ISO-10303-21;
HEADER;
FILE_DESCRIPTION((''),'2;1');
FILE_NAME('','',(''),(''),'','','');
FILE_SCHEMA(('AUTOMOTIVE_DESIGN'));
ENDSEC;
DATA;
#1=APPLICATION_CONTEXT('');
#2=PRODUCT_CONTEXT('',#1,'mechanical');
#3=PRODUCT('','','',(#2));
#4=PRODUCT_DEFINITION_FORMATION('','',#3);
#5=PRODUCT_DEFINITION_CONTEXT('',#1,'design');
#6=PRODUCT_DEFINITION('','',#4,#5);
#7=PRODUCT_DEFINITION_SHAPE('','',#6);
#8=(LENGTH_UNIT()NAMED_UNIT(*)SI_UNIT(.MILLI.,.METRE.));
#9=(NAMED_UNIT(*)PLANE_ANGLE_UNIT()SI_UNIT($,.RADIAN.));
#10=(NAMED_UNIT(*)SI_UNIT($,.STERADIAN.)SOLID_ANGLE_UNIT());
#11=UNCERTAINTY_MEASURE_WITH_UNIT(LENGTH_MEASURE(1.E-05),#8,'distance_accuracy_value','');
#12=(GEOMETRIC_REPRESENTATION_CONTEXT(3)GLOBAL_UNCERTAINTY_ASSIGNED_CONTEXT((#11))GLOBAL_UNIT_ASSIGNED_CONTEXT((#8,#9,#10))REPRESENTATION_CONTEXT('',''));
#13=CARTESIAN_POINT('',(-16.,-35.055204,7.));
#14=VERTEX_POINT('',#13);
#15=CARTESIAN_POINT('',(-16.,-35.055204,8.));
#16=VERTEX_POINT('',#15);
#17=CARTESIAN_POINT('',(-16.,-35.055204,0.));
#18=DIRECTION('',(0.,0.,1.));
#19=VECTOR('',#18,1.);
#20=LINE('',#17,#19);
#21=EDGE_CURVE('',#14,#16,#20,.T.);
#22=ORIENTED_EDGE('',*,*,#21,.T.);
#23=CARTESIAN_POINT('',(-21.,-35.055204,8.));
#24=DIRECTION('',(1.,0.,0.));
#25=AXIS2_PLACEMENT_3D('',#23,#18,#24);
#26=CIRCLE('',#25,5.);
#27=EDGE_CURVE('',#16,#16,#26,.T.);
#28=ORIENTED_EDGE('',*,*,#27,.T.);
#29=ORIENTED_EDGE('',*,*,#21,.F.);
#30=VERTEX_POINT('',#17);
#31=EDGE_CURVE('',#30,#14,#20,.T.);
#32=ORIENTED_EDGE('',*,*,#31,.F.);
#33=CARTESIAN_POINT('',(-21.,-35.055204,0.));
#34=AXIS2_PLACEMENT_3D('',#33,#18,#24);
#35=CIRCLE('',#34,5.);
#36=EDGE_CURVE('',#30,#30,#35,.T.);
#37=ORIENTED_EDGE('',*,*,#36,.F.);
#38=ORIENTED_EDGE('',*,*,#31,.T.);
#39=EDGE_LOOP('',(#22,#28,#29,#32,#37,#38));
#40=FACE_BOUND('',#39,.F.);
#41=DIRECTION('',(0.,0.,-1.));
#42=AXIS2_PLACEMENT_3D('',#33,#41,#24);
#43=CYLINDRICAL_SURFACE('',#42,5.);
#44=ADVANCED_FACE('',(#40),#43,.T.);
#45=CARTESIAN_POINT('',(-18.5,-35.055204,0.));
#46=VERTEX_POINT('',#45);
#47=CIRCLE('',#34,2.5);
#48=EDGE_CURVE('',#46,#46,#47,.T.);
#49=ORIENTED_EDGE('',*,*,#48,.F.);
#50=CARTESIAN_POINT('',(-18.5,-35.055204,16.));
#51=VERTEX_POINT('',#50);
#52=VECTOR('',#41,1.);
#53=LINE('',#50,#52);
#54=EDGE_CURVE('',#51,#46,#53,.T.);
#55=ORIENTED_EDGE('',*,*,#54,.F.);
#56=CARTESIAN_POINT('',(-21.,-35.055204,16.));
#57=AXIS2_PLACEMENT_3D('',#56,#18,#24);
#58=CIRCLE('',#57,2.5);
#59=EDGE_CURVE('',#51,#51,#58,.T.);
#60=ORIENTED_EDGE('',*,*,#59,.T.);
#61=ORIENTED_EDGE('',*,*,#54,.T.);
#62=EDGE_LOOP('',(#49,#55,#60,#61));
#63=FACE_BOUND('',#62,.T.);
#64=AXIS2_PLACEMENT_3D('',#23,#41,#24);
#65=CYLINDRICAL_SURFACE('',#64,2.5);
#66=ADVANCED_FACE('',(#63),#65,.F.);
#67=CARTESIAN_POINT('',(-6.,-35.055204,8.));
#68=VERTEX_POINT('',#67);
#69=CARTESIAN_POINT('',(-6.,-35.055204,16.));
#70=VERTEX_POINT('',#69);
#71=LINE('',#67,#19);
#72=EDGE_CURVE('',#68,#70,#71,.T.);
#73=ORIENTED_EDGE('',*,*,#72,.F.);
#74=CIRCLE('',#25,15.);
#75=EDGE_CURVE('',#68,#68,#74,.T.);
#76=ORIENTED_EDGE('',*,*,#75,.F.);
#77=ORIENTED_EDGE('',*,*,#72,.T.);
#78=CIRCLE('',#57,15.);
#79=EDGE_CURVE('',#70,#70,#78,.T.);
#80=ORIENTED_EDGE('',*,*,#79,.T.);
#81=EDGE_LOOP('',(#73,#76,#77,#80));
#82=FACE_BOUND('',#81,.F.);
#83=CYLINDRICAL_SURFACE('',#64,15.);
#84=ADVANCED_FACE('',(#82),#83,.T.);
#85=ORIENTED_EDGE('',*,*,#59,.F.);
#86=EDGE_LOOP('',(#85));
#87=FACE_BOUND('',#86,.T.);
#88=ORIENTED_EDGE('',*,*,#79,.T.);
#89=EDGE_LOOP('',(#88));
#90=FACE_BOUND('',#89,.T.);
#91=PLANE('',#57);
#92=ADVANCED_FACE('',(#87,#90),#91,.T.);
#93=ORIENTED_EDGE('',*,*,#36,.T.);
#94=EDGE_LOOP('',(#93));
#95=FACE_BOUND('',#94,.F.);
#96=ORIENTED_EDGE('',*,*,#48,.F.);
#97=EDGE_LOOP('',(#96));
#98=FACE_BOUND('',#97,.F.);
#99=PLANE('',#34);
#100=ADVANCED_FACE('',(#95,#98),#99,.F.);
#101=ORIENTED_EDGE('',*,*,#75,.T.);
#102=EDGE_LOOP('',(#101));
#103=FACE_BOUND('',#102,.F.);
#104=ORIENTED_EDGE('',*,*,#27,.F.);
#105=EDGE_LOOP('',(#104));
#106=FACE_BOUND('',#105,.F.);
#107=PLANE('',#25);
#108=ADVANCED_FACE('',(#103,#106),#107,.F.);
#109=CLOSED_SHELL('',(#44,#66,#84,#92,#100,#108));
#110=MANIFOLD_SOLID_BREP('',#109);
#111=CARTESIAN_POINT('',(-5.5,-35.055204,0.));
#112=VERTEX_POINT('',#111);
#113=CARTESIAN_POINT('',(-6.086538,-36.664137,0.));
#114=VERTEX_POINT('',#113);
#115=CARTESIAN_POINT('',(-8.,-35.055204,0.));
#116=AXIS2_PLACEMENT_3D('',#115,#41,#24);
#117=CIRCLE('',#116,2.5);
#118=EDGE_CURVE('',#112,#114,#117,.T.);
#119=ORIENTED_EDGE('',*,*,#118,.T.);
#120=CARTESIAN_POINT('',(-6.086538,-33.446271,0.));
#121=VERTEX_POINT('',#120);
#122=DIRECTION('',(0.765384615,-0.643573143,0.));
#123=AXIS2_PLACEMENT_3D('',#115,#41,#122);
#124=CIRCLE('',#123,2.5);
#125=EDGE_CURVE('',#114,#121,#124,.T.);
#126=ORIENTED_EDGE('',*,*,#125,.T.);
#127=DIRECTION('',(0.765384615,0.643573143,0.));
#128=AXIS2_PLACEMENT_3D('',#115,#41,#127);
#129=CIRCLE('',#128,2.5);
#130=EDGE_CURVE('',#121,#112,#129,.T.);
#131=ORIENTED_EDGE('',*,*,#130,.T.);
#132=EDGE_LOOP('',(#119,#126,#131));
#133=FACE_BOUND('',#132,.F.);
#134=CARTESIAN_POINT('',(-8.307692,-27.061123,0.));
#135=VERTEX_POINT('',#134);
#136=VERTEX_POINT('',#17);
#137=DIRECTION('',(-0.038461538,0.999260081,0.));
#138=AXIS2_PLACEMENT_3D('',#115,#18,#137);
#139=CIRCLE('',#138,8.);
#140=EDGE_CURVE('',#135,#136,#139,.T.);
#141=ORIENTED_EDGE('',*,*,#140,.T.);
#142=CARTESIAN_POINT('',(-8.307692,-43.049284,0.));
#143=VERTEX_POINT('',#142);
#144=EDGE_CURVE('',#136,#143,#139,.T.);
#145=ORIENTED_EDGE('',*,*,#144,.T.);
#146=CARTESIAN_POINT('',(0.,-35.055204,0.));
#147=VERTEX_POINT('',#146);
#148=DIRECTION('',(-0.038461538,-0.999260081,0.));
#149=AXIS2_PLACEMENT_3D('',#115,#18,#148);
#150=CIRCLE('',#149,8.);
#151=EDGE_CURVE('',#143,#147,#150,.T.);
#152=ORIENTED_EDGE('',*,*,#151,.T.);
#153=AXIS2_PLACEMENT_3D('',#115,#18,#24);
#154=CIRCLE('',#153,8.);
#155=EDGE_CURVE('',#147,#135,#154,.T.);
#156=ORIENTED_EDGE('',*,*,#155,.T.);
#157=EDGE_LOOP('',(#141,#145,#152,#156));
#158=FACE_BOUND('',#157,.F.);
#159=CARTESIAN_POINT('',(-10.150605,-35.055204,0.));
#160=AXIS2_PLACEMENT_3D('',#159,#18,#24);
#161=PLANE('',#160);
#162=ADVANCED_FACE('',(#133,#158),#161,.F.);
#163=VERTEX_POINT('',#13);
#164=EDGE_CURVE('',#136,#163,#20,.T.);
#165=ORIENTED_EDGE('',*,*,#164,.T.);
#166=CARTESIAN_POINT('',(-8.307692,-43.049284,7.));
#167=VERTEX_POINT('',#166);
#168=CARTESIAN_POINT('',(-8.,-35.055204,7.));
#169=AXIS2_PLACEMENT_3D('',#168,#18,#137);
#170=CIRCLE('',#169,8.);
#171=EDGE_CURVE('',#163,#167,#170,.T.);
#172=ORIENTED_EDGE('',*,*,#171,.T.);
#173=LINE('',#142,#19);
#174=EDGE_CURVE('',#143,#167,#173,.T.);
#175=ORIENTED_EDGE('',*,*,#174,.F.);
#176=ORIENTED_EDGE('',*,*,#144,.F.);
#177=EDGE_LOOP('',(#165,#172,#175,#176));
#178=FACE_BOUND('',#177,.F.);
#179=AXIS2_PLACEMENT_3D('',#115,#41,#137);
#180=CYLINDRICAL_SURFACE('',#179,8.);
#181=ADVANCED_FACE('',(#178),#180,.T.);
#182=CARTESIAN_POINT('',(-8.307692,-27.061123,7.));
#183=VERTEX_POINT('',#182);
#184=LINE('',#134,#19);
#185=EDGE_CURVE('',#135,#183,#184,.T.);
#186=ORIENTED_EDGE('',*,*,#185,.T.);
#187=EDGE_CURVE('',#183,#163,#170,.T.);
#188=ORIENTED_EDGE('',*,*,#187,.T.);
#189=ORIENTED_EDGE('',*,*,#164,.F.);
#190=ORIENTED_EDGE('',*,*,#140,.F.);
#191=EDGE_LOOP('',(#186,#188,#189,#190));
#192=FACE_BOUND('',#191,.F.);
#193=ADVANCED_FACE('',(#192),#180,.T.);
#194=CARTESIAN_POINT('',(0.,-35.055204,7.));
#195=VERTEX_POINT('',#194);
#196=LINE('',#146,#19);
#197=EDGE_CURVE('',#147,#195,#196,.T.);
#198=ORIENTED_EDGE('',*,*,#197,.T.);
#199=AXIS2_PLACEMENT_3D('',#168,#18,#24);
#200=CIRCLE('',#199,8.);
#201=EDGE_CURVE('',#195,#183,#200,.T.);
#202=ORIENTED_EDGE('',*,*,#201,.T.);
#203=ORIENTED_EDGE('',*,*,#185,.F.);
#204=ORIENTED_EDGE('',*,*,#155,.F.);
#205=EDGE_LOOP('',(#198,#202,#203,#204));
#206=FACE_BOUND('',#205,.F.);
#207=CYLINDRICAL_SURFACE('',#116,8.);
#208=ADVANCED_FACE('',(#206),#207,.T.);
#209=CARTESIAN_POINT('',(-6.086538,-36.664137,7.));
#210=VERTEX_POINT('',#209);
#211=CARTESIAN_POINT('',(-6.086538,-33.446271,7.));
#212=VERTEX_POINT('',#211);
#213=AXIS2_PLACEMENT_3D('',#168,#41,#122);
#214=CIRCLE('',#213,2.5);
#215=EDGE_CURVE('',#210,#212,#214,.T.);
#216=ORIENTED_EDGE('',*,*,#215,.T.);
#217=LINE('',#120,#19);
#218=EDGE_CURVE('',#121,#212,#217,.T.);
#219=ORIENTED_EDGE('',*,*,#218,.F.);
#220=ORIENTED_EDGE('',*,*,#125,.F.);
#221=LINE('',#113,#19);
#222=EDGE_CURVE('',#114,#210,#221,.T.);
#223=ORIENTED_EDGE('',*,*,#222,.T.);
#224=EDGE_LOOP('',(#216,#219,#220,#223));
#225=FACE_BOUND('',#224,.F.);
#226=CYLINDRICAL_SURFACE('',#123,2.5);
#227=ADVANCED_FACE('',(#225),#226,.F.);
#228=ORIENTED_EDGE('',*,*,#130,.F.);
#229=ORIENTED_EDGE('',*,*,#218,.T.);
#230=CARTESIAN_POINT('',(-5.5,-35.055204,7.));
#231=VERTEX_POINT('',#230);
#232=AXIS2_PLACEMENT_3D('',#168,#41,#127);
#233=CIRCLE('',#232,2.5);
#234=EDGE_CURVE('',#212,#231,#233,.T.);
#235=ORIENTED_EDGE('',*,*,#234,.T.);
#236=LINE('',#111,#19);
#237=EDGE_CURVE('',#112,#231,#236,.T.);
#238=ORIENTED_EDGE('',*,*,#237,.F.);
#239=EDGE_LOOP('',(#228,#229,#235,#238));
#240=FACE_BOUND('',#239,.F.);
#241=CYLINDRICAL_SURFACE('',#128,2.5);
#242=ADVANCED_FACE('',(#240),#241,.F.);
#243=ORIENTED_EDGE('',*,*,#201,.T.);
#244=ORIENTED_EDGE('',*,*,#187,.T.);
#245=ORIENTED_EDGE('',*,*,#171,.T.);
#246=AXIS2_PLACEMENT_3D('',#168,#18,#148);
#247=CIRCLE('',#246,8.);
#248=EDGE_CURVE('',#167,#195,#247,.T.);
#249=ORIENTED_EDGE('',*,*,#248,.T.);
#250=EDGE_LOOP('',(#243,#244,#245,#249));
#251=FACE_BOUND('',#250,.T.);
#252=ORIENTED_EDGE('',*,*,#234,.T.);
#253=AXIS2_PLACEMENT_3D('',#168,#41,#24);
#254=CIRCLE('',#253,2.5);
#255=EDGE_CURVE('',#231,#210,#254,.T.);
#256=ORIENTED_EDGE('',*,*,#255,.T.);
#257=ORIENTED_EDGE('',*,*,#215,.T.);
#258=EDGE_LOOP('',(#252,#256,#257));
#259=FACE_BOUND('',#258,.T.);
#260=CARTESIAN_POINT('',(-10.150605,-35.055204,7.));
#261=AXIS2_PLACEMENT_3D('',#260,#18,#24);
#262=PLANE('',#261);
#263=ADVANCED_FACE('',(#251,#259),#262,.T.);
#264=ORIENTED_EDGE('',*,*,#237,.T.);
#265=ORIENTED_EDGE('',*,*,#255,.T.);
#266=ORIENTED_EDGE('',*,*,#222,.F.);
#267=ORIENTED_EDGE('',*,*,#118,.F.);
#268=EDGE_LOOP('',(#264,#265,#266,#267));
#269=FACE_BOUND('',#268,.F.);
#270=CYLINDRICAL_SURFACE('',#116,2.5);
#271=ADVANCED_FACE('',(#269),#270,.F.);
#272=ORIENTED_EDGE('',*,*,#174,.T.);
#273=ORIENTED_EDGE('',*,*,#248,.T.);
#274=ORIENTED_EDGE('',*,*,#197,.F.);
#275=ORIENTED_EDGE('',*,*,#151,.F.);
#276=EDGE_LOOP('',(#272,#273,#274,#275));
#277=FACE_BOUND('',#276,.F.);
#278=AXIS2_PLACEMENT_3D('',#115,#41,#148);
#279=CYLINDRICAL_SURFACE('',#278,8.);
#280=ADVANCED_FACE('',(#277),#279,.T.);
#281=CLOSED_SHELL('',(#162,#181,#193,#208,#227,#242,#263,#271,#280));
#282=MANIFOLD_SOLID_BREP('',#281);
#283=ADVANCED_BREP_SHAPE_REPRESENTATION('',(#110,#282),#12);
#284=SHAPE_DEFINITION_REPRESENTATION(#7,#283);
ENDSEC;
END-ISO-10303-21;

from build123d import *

# Parameters (mm, degrees)
F0_R     = 5
F0_R_2   = 2.5
F1_DEPTH = 8
F2_R     = 15
F2_R_2   = 5
F2_R_3   = 2.5
F3_DEPTH = 8
F4_DEPTH = 7


# Not quite as in the source:
# - a feature names something its author has since deleted; it is built from what else it names


with BuildPart() as f1:
    # F0 (on Top) → F1 (new body)
    with BuildSketch(Plane.XY):
        with Locations((-21, -35.0552037954)):
            Circle(F0_R)
        with Locations((-21, -35.0552037954)):
            Circle(F0_R_2, mode=Mode.SUBTRACT)
    extrude(amount=F1_DEPTH)

    # F2 (on face) → F3 (join)
    with BuildSketch(Plane.XY.offset(8)):
        with Locations((-21, -35.0552037954)):
            Circle(F2_R)
        with Locations((-21, -35.0552037954)):
            Circle(F2_R_2, mode=Mode.SUBTRACT)
        with Locations((-21, -35.0552037954)):
            Circle(F2_R_2)
        with Locations((-21, -35.0552037954)):
            Circle(F2_R_3, mode=Mode.SUBTRACT)
    extrude(amount=F3_DEPTH)

    # F0 (on Top) → F4 (join)
    with BuildSketch(Plane.XY):
        with BuildLine():
            ThreePointArc((-6.0865384615, -36.6641366532), (-10.5, -35.0552037954), (-6.0865384615, -33.4462709377))
            ThreePointArc((-6.0865384615, -33.4462709377), (-6.832708382, -30.1269334892), (-8.3076923077, -27.0611231451))
            ThreePointArc((-8.3076923077, -27.0611231451), (-13.764613537, -29.5082018332), (-16, -35.0552037954))
            ThreePointArc((-16, -35.0552037954), (-13.764613537, -40.6022057577), (-8.3076923077, -43.0492844458))
            ThreePointArc((-8.3076923077, -43.0492844458), (-6.832708382, -39.9834741017), (-6.0865384615, -36.6641366532))
        make_face()
        with BuildLine():
            ThreePointArc((-8.3076923077, -27.0611231451), (-6.832708382, -30.1269334892), (-6.0865384615, -33.4462709377))
            ThreePointArc((-6.0865384615, -33.4462709377), (-5.6512073478, -34.1989485316), (-5.5, -35.0552037954))
            ThreePointArc((-5.5, -35.0552037954), (-5.6512073478, -35.9114590593), (-6.0865384615, -36.6641366532))
            ThreePointArc((-6.0865384615, -36.6641366532), (-6.832708382, -39.9834741017), (-8.3076923077, -43.0492844458))
            ThreePointArc((-8.3076923077, -43.0492844458), (-2.4529980377, -40.8198173324), (0, -35.0552037954))
            ThreePointArc((0, -35.0552037954), (-2.4529980377, -29.2905902584), (-8.3076923077, -27.0611231451))
        make_face()
    extrude(amount=F4_DEPTH)


solid = f1.part
